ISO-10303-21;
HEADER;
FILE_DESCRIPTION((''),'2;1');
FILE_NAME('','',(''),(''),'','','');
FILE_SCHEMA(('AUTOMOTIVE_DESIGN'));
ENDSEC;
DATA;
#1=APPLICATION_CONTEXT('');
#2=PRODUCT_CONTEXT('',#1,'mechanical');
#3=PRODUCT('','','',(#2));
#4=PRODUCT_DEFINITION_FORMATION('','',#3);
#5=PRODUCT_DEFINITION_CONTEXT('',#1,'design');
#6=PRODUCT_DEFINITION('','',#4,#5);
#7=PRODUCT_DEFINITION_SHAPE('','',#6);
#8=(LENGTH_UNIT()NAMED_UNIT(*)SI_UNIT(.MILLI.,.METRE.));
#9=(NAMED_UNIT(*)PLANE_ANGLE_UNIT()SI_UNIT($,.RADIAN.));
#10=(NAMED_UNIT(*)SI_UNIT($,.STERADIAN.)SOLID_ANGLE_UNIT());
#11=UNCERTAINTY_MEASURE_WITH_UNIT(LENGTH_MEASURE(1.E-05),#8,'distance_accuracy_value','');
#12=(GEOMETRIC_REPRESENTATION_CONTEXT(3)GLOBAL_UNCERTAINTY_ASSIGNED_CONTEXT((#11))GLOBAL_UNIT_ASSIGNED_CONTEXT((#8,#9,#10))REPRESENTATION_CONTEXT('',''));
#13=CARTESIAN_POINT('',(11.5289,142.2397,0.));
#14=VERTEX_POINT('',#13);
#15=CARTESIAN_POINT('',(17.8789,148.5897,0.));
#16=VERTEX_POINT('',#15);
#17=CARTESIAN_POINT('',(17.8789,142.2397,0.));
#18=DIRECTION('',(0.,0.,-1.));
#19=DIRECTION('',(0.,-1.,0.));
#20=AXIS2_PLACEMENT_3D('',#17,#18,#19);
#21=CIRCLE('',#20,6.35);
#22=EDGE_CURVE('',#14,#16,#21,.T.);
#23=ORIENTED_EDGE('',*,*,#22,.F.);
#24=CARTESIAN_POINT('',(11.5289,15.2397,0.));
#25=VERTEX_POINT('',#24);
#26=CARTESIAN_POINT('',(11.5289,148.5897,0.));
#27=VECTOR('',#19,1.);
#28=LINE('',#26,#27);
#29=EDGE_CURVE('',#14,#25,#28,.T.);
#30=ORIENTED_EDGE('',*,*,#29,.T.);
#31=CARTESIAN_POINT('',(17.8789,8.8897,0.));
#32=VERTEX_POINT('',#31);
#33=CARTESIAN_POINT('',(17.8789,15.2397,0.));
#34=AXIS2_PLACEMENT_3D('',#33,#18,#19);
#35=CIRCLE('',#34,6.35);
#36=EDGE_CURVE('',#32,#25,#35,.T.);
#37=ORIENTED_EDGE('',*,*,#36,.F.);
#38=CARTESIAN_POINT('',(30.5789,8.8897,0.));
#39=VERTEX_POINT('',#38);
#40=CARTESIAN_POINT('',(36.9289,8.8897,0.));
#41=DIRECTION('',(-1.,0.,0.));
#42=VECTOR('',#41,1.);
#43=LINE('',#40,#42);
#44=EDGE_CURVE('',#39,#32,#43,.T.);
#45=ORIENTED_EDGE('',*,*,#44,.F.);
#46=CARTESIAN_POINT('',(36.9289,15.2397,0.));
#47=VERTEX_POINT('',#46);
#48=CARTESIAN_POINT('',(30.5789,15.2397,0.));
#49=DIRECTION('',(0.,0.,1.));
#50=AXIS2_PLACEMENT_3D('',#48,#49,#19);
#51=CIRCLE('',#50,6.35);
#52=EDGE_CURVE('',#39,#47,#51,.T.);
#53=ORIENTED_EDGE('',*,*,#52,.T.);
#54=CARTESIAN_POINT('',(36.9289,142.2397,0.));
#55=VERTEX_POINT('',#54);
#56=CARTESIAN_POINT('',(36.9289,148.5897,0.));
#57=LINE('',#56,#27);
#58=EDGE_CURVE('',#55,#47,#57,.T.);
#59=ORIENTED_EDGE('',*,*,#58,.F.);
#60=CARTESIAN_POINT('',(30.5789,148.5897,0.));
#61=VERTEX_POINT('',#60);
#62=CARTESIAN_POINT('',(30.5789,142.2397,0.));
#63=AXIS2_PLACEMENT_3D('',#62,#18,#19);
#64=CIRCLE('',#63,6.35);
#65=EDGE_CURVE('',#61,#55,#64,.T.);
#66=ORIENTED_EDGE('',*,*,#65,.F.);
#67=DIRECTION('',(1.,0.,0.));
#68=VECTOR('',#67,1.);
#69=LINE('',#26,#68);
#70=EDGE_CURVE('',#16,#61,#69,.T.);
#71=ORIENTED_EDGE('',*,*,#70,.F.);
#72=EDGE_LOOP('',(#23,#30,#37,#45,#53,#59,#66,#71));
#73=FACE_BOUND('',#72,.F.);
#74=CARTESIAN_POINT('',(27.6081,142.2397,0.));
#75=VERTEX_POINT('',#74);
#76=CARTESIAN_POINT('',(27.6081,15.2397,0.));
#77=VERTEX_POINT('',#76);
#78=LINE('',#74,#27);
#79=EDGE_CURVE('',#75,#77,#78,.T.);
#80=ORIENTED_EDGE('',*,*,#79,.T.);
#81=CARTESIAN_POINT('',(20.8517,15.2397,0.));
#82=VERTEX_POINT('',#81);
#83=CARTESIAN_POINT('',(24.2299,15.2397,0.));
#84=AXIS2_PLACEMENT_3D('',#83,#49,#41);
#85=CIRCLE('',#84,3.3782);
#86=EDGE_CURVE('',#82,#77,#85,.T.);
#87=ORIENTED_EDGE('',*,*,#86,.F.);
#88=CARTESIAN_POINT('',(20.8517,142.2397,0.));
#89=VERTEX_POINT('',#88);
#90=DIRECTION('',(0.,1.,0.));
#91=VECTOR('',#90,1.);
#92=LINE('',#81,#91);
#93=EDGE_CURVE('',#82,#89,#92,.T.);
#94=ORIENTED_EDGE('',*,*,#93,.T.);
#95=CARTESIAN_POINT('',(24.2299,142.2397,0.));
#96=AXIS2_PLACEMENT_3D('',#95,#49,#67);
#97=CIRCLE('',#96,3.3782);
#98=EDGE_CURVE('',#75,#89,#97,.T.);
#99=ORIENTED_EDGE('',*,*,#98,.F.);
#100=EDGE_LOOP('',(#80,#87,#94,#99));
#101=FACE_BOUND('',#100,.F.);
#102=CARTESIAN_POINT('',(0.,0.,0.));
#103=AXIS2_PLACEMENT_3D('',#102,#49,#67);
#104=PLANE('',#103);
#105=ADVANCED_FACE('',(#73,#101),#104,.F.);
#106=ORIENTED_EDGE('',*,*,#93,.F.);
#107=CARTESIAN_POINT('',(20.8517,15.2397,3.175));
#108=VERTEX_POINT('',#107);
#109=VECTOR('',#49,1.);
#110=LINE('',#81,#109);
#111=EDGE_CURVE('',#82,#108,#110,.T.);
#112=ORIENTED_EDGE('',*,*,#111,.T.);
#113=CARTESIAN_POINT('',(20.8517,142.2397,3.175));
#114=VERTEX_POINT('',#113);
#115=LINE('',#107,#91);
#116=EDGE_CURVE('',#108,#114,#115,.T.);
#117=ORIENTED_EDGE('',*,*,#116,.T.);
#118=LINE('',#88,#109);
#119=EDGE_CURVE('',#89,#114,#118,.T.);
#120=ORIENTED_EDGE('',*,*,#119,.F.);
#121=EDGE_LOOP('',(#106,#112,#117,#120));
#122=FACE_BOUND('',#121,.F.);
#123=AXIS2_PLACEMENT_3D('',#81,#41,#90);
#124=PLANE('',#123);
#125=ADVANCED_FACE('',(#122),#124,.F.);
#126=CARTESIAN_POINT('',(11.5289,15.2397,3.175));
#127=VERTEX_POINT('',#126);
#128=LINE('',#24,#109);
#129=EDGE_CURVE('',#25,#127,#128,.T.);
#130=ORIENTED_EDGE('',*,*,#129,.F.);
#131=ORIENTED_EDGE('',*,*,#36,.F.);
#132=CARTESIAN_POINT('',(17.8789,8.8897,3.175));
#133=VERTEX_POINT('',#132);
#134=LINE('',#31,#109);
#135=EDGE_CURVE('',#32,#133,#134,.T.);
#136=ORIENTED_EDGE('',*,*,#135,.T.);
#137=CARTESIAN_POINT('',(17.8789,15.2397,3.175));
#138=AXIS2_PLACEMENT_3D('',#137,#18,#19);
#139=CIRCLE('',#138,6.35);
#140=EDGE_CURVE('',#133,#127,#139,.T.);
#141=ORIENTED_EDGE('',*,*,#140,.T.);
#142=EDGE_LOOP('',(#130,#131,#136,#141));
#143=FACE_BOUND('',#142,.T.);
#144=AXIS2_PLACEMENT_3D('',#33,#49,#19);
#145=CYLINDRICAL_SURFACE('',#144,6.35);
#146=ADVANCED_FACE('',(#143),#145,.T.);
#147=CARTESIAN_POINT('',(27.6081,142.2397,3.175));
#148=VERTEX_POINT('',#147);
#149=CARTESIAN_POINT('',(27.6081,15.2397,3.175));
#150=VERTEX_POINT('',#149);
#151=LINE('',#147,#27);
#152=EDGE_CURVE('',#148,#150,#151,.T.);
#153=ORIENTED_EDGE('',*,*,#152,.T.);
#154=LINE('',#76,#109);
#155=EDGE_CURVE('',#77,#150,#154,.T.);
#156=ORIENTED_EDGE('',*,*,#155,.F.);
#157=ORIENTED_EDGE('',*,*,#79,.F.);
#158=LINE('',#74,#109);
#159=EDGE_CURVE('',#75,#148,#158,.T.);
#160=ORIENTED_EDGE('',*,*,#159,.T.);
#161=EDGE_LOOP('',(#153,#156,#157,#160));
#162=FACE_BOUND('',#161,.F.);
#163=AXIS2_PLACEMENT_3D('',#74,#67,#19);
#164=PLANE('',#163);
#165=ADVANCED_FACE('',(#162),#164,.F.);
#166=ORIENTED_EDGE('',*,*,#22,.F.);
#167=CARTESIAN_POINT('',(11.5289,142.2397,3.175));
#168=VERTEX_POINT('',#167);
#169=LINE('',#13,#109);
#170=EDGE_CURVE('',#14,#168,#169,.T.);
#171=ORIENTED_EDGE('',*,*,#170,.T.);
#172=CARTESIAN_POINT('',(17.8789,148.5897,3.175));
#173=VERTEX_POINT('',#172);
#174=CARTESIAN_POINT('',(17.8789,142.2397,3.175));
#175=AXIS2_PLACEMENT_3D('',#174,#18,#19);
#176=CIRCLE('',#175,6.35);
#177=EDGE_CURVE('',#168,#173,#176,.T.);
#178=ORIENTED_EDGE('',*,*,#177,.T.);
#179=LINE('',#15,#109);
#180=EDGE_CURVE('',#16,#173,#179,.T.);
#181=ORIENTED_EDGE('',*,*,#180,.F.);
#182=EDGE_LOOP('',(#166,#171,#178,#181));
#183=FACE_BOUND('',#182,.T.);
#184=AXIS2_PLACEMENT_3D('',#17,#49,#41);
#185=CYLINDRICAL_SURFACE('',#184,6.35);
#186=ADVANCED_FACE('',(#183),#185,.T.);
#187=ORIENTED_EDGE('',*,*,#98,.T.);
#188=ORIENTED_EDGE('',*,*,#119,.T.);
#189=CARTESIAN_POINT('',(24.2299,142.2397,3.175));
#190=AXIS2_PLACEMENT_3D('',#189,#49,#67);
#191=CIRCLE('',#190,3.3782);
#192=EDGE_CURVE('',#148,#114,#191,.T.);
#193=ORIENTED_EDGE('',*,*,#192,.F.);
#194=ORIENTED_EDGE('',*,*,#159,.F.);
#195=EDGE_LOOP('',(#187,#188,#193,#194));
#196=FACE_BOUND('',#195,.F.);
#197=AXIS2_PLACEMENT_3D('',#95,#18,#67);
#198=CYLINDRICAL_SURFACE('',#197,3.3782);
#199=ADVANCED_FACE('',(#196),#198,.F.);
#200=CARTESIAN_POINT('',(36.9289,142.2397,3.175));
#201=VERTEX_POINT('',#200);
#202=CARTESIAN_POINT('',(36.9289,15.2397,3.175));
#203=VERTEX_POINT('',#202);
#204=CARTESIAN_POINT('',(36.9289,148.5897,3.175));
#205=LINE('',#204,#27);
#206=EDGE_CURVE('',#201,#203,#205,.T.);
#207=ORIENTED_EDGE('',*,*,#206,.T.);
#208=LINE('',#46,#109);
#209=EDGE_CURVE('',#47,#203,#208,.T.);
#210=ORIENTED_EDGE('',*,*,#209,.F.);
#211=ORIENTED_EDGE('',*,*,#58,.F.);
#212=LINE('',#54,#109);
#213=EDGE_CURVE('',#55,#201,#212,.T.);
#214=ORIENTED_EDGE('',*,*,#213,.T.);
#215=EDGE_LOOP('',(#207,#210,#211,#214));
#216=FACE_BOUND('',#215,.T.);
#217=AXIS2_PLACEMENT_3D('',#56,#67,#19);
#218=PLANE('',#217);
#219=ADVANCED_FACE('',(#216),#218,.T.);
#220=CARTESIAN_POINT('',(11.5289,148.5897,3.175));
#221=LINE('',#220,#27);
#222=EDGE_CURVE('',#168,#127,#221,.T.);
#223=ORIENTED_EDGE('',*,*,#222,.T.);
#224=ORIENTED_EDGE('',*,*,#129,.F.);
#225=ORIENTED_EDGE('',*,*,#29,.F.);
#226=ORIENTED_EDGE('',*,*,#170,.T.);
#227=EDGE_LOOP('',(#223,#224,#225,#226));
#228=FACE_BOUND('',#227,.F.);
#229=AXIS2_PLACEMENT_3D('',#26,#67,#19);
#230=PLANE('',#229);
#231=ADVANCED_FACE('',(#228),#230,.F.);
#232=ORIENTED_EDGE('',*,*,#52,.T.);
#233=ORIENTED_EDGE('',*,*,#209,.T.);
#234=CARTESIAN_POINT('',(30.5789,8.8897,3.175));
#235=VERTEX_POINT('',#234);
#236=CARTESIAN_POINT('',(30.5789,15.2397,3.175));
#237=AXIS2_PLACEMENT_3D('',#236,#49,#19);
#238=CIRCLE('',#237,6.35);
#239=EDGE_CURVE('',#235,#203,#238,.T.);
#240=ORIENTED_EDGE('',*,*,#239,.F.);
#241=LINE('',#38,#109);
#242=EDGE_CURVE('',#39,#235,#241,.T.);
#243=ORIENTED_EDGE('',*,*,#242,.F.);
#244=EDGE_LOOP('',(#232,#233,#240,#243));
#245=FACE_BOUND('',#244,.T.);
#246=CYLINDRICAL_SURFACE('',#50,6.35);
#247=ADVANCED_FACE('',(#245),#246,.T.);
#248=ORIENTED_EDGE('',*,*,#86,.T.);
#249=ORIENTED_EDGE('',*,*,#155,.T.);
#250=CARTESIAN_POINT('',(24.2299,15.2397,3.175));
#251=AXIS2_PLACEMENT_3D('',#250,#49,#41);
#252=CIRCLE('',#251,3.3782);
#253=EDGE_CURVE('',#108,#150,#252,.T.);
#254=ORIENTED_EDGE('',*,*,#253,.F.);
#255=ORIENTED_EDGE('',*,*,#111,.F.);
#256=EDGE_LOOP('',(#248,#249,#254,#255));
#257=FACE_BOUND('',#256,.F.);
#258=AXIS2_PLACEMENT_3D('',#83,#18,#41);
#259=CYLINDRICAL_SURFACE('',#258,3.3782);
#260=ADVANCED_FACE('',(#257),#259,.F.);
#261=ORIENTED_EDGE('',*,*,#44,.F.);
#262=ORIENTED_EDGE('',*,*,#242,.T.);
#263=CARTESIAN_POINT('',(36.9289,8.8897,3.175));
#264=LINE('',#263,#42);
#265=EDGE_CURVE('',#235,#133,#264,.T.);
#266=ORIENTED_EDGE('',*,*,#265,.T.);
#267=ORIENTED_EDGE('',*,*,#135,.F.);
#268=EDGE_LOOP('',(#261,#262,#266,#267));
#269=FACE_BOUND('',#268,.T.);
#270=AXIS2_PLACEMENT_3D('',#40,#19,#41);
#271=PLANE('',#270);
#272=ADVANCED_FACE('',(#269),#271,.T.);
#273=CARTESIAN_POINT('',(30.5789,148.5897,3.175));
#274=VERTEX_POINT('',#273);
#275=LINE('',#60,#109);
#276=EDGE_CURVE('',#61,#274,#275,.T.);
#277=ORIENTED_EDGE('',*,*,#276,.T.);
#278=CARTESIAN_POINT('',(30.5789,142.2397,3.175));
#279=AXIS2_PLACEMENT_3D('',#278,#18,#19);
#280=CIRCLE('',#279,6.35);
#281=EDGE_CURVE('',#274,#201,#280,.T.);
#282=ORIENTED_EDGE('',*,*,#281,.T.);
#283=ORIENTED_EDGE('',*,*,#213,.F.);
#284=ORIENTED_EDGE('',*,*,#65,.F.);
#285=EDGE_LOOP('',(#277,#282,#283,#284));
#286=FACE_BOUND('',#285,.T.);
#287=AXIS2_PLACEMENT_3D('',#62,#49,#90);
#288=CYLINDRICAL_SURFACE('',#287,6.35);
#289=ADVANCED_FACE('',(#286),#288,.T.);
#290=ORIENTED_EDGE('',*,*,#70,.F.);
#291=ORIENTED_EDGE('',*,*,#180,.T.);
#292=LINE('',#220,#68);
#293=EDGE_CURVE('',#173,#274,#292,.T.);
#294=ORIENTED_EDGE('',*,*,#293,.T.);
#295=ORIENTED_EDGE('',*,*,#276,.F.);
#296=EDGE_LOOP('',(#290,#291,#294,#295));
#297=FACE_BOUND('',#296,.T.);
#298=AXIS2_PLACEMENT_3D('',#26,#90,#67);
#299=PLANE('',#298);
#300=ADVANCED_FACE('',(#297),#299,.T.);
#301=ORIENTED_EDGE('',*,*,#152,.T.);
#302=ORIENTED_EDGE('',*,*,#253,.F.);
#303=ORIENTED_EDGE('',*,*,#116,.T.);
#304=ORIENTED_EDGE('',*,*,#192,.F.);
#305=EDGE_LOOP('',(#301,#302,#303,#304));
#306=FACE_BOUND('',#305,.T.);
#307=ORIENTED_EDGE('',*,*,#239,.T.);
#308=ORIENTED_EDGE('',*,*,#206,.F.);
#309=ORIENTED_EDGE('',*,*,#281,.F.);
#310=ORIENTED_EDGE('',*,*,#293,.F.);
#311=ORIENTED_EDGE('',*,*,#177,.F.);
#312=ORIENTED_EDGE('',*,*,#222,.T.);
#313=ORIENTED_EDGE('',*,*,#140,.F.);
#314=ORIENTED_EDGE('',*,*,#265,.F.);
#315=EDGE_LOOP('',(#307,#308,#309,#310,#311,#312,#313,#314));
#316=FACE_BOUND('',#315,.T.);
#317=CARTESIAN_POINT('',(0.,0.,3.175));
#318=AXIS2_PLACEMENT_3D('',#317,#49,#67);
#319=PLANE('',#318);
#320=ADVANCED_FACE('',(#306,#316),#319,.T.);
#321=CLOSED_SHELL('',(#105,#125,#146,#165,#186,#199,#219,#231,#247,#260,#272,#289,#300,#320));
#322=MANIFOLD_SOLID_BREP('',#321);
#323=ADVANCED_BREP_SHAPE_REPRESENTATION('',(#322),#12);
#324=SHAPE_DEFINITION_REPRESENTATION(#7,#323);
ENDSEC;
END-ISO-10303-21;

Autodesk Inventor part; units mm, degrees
ref_plane "YZ Plane" through (0, 0, 0) normal (1, 0, 0) x (0, 1, 0)
ref_plane "XZ Plane" through (0, 0, 0) normal (0, 1, 0) x (-1, 0, 0)
ref_plane "XY Plane" through (0, 0, 0) normal (0, 0, 1) x (1, 0, 0)
sketch "Sketch1" plane through (0, 0, 0) normal (0, 0, 1) x (1, 0, 0)
  line L0 (36.9289, 8.8897) -> (11.5289, 8.8897)
  line L1 (36.9289, 148.5897) -> (36.9289, 8.8897)
  line L2 (11.5289, 148.5897) -> (36.9289, 148.5897)
  line L3 (20.8517, 15.2397) -> (20.8517, 142.2397)
  arc A0 (27.6081, 142.2397) -> (20.8517, 142.2397) centre (24.2299, 142.2397) ccw
  line L4 (27.6081, 142.2397) -> (27.6081, 15.2397)
  arc A1 (20.8517, 15.2397) -> (27.6081, 15.2397) centre (24.2299, 15.2397) ccw
  line L5 (36.9289, 148.5897) -> (11.5289, 148.5897)
  line L6 (11.5289, 148.5897) -> (11.5289, 8.8897)
  point P0 (0, 0)
  point P1 (0, 0)
  dimension "d0" = 25.4
  dimension "d2" = 139.7
  dimension "d5" = 6.35
  dimension "d6" = 6.35
  dimension "d7" = 3.3782
  dimension "d8" = 6.7564
  dimension "d9" = 3.3782
extrude "Plate1" add sketch "Sketch1" along normal blind 3.175
fillet "Corner Round1" radius 6.35 4 edges at (36.9289, 148.5897, 1.5875) (11.5289, 148.5897, 1.5875) (36.9289, 8.8897, 1.5875) (11.5289, 8.8897, 1.5875)
equation "\"BendRadius\" = Thickness"
equation "\"BendReliefWidth\" = Thickness"
equation "\"BendReliefDepth\" = 0.5 * Thickness"
equation "\"CornerReliefSize\" = 4 * Thickness"
equation "\"MinimumRemnant\" = 2 * Thickness"
equation "\"TransitionRadius\" = BendRadius"
equation "\"JacobiRadiusSize\" = BendRadius"
equation "\"GapSize\" = Thickness"
equation "\"d1\" = BendRadius"
equation "\"Thickness\" = 3.175"
properties part number "back brace mount" material "Aluminum 6061"
